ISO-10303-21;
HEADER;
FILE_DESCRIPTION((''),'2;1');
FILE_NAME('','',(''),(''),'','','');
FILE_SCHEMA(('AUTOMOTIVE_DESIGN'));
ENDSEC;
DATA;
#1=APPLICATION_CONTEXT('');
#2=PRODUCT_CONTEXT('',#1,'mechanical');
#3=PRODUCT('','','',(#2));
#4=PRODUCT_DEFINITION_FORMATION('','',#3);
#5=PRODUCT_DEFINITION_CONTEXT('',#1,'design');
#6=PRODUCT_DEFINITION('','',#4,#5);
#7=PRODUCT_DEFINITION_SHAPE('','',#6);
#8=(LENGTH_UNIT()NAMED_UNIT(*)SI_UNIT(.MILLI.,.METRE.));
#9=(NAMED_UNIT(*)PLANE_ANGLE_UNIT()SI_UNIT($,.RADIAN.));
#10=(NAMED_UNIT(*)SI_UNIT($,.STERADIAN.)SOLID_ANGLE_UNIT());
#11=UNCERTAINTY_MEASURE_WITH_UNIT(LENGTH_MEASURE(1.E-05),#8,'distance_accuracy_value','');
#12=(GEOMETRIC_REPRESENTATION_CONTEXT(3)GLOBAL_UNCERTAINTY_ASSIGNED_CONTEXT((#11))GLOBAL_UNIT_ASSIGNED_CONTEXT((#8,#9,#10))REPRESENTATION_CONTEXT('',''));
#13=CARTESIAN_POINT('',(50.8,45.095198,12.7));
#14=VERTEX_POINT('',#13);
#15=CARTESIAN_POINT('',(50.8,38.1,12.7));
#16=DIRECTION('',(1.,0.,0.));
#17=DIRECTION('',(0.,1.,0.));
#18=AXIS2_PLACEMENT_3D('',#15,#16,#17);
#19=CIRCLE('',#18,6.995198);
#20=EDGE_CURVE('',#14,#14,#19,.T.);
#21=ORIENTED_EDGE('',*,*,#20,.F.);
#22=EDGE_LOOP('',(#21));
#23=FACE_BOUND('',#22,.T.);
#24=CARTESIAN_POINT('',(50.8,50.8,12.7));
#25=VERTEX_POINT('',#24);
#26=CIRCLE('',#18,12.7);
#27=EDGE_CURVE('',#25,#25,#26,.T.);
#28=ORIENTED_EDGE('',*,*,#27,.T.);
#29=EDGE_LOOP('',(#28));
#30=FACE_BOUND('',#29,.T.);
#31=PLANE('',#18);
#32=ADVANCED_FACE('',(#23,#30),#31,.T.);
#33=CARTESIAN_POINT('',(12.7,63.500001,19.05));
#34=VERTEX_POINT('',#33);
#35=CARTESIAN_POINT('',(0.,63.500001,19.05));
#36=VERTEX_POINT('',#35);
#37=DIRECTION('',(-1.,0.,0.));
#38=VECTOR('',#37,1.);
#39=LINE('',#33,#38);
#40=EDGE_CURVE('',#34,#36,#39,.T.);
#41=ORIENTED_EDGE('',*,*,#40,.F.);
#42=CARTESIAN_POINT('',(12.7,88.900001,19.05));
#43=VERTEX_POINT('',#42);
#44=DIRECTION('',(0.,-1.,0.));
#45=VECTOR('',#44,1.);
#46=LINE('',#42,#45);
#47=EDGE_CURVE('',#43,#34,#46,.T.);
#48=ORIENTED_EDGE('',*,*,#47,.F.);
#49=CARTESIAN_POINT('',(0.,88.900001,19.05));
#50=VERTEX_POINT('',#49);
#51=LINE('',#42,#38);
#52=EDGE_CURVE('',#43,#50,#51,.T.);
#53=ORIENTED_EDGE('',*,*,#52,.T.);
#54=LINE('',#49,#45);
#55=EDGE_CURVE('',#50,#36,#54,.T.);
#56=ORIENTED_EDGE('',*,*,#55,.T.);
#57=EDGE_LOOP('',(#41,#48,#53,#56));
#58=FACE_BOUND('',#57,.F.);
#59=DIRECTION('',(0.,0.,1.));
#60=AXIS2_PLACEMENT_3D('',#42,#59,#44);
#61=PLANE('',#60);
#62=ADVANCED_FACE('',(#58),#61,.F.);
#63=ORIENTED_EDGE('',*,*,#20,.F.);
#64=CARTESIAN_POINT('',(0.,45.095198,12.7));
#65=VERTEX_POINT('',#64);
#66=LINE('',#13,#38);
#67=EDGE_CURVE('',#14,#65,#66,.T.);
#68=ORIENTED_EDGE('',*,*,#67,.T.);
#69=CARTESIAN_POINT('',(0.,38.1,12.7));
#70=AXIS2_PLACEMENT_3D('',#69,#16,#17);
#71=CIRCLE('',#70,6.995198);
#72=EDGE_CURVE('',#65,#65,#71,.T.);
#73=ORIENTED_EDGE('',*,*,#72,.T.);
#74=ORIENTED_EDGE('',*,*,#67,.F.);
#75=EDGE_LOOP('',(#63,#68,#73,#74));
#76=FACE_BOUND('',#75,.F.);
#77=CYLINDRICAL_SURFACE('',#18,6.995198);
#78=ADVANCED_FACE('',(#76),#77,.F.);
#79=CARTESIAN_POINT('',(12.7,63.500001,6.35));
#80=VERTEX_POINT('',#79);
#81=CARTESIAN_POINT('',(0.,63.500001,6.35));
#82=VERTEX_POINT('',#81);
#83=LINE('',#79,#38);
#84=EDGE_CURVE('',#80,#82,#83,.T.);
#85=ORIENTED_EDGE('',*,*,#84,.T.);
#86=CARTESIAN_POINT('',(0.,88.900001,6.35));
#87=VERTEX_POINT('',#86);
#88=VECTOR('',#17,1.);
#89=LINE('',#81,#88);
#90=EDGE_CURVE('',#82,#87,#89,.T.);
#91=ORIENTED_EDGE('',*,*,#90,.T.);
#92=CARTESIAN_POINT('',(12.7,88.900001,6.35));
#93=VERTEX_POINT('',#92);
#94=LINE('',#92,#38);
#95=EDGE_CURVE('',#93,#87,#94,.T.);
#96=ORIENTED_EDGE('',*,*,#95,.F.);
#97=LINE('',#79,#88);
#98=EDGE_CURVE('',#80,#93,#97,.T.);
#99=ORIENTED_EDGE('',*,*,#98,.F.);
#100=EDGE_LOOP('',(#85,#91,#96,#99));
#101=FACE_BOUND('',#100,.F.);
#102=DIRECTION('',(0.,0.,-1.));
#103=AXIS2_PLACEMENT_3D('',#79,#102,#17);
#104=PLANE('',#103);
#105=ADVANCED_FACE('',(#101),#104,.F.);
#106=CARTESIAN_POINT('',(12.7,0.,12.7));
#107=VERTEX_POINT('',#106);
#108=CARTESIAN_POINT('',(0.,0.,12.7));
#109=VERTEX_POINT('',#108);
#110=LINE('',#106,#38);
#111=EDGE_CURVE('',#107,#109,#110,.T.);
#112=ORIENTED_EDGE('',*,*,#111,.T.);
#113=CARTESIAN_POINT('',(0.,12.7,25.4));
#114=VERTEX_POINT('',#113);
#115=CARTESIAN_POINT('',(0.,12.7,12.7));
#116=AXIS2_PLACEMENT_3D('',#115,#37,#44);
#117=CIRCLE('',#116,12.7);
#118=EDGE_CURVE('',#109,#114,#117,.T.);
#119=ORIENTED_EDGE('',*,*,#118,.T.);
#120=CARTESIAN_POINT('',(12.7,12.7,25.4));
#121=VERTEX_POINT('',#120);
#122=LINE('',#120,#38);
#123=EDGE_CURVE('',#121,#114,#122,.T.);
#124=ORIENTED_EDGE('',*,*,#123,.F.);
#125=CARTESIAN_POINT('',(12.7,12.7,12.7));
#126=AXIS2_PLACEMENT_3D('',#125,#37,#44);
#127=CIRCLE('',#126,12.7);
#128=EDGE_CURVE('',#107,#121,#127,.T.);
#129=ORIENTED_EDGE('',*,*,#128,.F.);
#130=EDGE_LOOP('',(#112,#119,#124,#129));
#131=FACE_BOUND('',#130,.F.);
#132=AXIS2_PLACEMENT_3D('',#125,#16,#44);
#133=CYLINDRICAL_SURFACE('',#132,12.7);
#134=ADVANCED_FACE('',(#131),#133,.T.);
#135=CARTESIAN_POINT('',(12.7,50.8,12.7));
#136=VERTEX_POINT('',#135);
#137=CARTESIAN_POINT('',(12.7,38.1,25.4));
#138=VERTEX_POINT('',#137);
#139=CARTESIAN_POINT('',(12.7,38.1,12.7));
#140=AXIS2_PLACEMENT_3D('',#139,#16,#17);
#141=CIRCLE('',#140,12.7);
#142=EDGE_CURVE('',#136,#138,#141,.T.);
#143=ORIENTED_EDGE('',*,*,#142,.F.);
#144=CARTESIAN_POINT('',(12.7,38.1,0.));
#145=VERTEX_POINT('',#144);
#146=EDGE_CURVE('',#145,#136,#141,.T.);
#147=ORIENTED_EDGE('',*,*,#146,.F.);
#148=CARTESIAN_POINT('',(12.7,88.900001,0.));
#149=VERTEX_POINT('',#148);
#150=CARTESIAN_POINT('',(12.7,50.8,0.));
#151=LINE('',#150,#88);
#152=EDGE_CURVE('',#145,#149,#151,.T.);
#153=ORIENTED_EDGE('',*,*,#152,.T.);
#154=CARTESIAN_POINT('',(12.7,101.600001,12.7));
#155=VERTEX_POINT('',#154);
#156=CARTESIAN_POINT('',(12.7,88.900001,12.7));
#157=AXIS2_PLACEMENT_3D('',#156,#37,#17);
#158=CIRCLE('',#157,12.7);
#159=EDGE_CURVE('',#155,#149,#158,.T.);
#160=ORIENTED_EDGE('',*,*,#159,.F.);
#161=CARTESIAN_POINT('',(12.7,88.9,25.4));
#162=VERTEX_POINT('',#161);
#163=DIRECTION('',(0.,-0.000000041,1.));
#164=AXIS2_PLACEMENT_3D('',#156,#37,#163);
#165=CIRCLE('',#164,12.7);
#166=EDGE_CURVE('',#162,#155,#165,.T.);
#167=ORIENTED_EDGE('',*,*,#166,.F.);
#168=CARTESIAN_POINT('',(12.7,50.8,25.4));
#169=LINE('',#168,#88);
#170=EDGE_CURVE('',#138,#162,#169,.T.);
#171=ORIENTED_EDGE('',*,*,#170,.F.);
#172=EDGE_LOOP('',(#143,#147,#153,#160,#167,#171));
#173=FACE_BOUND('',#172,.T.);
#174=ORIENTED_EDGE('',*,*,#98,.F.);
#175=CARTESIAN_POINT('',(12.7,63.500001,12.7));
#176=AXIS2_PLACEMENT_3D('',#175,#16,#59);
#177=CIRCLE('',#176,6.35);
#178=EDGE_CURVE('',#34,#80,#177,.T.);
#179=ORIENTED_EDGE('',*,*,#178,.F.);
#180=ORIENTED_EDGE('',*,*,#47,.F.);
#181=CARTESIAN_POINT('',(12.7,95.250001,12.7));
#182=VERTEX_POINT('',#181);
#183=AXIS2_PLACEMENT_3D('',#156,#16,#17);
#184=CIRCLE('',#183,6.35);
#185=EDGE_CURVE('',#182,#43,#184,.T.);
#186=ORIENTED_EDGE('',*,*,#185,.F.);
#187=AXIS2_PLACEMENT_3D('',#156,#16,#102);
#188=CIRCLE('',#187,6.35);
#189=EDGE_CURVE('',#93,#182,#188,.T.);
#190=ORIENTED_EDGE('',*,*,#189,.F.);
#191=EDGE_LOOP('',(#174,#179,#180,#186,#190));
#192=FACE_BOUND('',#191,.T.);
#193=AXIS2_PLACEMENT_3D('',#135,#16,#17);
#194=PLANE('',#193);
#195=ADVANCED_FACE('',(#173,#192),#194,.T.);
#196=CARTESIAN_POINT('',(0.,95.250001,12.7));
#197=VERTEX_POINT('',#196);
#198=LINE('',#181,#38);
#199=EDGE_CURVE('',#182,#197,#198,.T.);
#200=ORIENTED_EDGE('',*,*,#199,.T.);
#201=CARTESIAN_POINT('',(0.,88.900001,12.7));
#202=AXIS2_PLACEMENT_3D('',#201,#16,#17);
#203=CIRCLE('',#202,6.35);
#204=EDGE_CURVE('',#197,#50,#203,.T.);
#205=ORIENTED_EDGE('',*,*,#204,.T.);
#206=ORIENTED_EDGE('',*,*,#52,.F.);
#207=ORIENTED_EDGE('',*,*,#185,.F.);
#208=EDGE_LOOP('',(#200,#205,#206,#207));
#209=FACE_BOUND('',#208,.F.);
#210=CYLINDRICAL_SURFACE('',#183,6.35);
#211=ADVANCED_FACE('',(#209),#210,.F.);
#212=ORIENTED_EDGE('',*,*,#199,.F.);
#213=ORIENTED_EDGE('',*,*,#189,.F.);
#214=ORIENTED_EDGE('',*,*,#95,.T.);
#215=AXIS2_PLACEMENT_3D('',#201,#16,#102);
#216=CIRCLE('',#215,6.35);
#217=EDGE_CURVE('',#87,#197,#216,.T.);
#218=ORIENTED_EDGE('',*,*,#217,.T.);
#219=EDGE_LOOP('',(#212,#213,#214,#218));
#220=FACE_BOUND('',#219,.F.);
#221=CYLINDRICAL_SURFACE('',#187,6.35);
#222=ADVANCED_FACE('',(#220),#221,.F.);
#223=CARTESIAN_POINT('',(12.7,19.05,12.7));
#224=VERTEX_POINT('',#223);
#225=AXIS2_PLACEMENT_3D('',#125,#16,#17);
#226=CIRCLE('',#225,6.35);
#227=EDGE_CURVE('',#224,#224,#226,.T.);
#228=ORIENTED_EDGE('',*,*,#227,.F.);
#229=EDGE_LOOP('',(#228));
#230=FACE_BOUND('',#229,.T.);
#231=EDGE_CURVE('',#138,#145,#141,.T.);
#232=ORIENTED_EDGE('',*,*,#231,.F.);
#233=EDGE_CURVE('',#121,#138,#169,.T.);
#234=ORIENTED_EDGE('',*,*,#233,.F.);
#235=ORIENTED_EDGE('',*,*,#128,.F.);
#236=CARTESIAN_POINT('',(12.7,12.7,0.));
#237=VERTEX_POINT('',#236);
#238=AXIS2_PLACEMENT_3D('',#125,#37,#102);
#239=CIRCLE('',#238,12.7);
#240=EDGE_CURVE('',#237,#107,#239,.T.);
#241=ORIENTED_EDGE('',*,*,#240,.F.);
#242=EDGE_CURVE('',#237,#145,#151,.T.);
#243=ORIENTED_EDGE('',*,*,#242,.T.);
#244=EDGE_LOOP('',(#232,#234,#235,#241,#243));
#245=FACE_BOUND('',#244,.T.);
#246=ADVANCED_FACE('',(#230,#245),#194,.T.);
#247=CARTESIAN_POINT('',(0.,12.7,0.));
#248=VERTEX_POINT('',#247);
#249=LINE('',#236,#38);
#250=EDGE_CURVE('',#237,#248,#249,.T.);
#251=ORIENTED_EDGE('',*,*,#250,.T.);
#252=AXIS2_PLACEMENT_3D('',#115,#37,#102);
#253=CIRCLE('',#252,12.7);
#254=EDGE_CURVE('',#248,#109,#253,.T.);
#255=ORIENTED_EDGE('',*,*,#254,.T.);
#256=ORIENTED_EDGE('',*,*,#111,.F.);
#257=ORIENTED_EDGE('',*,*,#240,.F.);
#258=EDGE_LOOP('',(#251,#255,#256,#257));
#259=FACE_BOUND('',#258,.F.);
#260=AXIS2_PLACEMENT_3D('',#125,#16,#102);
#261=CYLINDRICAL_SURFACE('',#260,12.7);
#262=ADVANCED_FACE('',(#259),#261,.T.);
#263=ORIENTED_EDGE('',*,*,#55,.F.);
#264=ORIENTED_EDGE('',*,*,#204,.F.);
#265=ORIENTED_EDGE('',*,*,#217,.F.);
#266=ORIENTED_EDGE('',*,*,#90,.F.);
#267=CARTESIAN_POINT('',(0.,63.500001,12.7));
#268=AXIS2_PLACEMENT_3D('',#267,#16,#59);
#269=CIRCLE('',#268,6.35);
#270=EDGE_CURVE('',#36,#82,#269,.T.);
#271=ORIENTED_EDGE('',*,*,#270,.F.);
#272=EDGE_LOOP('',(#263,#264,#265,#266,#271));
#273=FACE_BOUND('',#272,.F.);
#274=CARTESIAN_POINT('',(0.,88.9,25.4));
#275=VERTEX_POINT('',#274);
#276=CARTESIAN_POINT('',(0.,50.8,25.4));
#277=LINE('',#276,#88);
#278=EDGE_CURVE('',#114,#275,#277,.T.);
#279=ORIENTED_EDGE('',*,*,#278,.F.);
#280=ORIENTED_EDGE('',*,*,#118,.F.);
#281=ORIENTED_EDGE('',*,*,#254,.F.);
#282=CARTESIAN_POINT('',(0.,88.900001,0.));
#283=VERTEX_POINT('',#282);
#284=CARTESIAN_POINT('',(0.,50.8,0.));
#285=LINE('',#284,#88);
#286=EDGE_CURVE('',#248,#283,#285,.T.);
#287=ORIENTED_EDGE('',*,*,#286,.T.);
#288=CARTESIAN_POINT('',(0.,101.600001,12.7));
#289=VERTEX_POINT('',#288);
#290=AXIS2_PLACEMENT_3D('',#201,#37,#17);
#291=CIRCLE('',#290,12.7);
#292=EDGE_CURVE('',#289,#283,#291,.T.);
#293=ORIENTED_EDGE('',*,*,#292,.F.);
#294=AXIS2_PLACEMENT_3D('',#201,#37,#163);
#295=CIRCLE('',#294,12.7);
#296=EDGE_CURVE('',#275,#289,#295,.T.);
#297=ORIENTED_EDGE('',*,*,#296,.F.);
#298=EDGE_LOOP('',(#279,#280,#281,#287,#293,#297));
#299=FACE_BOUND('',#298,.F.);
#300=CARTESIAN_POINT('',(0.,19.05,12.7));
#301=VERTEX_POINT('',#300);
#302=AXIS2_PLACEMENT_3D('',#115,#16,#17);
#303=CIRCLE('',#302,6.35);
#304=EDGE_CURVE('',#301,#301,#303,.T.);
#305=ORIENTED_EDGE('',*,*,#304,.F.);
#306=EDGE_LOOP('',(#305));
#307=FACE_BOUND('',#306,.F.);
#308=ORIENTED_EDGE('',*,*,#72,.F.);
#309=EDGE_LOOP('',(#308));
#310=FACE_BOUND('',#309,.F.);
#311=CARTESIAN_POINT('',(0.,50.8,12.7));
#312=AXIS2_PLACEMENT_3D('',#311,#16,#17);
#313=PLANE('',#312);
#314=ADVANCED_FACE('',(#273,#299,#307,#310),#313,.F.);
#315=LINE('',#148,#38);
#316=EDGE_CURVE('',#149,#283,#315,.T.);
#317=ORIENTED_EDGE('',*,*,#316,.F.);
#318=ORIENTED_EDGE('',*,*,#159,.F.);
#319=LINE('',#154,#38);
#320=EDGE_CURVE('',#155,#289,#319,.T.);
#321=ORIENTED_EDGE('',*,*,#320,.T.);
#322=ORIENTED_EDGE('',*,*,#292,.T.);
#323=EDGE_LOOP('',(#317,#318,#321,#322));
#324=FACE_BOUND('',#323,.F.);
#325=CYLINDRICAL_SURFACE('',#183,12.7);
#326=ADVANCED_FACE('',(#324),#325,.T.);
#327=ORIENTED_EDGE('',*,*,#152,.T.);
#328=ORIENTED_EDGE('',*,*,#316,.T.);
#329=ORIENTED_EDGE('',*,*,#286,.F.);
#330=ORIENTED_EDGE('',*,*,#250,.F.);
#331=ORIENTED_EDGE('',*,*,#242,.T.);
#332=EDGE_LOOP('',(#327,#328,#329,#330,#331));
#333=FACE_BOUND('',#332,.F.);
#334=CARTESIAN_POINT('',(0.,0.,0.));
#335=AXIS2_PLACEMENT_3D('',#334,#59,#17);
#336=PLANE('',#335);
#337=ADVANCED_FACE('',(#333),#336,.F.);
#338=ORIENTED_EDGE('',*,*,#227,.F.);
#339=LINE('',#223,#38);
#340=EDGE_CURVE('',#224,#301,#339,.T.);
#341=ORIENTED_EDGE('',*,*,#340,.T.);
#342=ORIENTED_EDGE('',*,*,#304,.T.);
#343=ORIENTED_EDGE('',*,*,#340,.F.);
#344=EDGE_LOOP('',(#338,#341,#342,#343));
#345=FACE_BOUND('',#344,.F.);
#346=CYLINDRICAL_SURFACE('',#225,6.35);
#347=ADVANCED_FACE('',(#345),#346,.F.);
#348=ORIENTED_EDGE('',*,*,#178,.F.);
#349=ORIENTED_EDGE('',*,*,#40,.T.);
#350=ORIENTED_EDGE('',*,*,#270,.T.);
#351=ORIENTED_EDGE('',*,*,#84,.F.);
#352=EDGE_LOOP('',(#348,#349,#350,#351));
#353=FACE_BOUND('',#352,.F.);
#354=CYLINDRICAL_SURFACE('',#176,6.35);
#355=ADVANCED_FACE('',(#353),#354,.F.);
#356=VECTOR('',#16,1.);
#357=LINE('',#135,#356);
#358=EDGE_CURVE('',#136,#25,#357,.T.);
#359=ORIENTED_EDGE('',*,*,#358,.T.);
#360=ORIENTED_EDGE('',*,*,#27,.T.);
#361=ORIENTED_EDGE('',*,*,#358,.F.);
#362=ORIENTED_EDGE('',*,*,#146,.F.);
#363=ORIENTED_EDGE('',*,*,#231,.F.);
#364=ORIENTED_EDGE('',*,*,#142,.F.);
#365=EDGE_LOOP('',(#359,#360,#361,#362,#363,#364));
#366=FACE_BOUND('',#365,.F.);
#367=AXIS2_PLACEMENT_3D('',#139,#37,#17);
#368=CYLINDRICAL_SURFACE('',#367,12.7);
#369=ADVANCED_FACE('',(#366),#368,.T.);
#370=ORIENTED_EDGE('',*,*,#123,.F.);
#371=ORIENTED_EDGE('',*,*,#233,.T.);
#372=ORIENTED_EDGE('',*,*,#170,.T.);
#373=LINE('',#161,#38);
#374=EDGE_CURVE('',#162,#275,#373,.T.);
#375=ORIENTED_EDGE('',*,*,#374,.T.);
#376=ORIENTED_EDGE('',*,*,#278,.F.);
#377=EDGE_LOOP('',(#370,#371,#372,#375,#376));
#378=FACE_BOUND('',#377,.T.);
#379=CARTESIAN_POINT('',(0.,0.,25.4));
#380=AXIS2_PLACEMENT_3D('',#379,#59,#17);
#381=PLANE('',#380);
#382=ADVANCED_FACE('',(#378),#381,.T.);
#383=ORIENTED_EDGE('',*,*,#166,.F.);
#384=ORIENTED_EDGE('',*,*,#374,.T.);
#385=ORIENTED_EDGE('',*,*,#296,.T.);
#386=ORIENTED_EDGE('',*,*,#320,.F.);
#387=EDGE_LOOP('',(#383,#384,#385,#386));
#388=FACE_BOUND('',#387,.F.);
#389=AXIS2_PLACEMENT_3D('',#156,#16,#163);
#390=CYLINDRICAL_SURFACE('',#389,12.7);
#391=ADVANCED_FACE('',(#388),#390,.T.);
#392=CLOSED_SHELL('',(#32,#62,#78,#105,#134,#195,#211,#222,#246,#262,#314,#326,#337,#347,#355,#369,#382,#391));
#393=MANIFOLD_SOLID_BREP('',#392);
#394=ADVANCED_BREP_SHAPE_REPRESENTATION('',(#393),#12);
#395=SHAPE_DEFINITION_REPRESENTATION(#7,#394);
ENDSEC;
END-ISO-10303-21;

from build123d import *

# Parameters (mm, degrees)
F0_W      = 101.6
F0_H      = 25.4
F1_DEPTH  = 12.7
F3_DEPTH  = 12.7
F4_R      = 6.35
F5_DEPTH  = 12.7
F7_R      = 12.7
F8_DEPTH  = 38.1
F9_R      = 6.9951982556
F10_DEPTH = 50.8


# Not quite as in the source:
# - ends of sketch curves that miss each other by under 0.0002 mm in the source are joined


with BuildPart() as f1:
    # F0 (on Right) → F1 (new body)
    with BuildSketch(Plane.YZ):
        with Locations((50.8, 12.7)):
            Rectangle(F0_W, F0_H)
    extrude(amount=F1_DEPTH)

    # F2 (on face) → F3 (cut)
    with BuildSketch(Plane.YZ.offset(12.7)):
        with BuildLine():
            Line((0, 25.4), (0, 12.7))
            ThreePointArc((0, 12.7), (3.7197438789, 21.6802561211), (12.7, 25.4))
            Line((12.7, 25.4), (0, 25.4))
        make_face()
        with BuildLine():
            Line((0, 0), (12.7, 0))
            ThreePointArc((12.7, 0), (3.7197438789, 3.7197438789), (0, 12.7))
            Line((0, 12.7), (0, 0))
        make_face()
        with BuildLine():
            ThreePointArc((88.9, 25.4), (97.8802564546, 21.6802563035), (101.6000005159, 12.7))
            Line((101.6000005159, 12.7), (101.6, 25.4))
            Line((101.6, 25.4), (88.9, 25.4))
        make_face()
        with BuildLine():
            ThreePointArc((101.6000005159, 12.7), (97.8802568194, 3.7197440613), (88.9000010318, 0))
            Line((88.9000010318, 0), (101.6, 0))
            Line((101.6, 0), (101.6000005159, 12.7))
        make_face()
    extrude(amount=-F3_DEPTH, mode=Mode.SUBTRACT)

    # F4 (on face) → F5 (cut)
    with BuildSketch(Plane.YZ.offset(12.7)):
        with Locations((12.7, 12.7)):
            Circle(F4_R)
        with BuildLine():
            ThreePointArc((63.5000005159, 6.35), (67.9901285764, 8.2098719395), (69.8500005159, 12.7))
            ThreePointArc((69.8500005159, 12.7), (67.9901285764, 17.1901280605), (63.5000005159, 19.05))
            ThreePointArc((63.5000005159, 19.05), (57.1500005159, 12.7), (63.5000005159, 6.35))
        make_face()
        with BuildLine():
            ThreePointArc((63.5000005159, 19.05), (67.9901285764, 17.1901280605), (69.8500005159, 12.7))
            ThreePointArc((69.8500005159, 12.7), (67.9901285764, 8.2098719395), (63.5000005159, 6.35))
            Line((63.5000005159, 6.35), (88.9000005159, 6.35))
            ThreePointArc((88.9000005159, 6.35), (82.5500005159, 12.7), (88.9000005159, 19.05))
            Line((88.9000005159, 19.05), (63.5000005159, 19.05))
        make_face()
        with BuildLine():
            ThreePointArc((95.2500005159, 12.7), (93.3901285764, 17.1901280605), (88.9000005159, 19.05))
            ThreePointArc((88.9000005159, 19.05), (82.5500005159, 12.7), (88.9000005159, 6.35))
            ThreePointArc((88.9000005159, 6.35), (93.3901285764, 8.2098719395), (95.2500005159, 12.7))
        make_face()
    extrude(amount=-F5_DEPTH, mode=Mode.SUBTRACT)

    # F7 (on face) → F8 (join)
    with BuildSketch(Plane.YZ.offset(12.7)):
        with Locations((38.1, 12.7)):
            Circle(F7_R)
    extrude(amount=F8_DEPTH)

    # F9 (on face) → F10 (cut)
    with BuildSketch(Plane.YZ.offset(50.8)):
        with Locations((38.1, 12.7)):
            Circle(F9_R)
    extrude(amount=-F10_DEPTH, mode=Mode.SUBTRACT)


solid = f1.part
